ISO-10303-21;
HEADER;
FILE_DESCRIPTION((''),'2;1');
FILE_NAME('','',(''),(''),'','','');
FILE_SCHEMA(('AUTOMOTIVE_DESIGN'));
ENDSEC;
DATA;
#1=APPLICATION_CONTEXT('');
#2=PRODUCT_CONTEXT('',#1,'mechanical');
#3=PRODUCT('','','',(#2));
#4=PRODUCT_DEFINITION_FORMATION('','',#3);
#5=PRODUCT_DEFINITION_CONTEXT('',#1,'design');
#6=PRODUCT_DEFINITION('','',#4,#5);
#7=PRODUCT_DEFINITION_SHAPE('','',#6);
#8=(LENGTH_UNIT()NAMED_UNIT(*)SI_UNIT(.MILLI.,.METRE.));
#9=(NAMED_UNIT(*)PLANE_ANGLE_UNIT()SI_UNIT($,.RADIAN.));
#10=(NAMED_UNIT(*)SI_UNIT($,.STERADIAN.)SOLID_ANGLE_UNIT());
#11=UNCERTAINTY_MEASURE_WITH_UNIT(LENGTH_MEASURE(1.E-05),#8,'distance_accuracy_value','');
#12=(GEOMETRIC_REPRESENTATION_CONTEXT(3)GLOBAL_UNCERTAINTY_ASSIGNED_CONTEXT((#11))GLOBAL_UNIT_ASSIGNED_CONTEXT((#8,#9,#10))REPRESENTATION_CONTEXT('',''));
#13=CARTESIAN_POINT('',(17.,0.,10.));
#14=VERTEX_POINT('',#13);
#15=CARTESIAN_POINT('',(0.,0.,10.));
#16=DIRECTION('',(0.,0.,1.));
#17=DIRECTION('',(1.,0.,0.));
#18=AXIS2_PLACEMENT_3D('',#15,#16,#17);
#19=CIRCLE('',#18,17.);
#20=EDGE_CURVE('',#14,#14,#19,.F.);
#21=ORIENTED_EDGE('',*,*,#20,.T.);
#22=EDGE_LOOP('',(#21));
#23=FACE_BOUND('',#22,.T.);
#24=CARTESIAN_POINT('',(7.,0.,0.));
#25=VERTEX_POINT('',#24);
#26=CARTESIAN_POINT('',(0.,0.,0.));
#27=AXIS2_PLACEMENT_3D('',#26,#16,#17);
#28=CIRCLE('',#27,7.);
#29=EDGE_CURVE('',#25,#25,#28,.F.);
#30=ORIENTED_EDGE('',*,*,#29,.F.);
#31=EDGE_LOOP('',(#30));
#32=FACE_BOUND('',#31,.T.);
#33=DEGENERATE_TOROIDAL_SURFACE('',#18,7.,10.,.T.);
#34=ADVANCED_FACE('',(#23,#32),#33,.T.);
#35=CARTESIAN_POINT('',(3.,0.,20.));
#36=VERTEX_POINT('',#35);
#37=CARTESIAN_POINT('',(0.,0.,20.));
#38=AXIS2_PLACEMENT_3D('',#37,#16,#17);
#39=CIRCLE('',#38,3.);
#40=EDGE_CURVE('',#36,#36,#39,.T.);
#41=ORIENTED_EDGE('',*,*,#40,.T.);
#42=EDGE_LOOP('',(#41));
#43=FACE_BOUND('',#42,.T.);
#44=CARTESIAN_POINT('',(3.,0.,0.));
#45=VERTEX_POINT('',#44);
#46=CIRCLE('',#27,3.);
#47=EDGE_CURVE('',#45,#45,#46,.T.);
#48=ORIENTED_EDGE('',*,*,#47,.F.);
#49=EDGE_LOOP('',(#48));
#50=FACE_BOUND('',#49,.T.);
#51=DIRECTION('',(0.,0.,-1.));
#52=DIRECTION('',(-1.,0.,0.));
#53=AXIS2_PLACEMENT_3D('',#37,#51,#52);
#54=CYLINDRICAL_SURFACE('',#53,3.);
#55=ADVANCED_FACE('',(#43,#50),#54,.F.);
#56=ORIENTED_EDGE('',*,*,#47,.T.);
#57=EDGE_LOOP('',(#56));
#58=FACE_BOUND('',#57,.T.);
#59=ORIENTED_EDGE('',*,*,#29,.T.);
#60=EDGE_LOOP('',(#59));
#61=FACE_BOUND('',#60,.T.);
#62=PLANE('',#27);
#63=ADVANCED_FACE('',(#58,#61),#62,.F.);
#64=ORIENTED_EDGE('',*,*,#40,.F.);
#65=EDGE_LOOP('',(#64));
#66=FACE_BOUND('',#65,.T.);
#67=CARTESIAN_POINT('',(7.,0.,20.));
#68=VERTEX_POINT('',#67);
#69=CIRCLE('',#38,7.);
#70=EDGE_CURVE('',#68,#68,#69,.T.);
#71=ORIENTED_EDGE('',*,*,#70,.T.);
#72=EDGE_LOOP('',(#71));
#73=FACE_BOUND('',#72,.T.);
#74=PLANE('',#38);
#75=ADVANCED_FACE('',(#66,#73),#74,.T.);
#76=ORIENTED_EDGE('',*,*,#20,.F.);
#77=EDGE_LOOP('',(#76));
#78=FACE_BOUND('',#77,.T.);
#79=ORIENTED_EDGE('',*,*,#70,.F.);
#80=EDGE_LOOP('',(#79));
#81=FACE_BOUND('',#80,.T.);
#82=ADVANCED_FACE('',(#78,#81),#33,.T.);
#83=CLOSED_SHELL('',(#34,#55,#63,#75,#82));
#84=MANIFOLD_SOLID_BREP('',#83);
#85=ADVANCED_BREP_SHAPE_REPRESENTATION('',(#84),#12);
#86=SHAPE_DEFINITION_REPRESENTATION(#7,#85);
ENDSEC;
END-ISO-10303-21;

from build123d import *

# Parameters (mm, degrees)
ESBO_O1_R                = 17
ESBO_O1_R_2              = 3
RESSALTO_EXTRUS_O1_DEPTH = 20
FILETE1_R                = 10


with BuildPart() as part:
    # Esboço1 → Ressalto-extrusão1 (new body)
    with BuildSketch(Plane.XY):
        Circle(ESBO_O1_R)
        Circle(ESBO_O1_R_2, mode=Mode.SUBTRACT)
    extrude(amount=RESSALTO_EXTRUS_O1_DEPTH)

    # Filete1
    filete1_edges = [part.edges().sort_by_distance(p)[0] for p in [
        (-17, 0, 0),
        (-17, 0, 20),
    ]]
    fillet(filete1_edges, radius=FILETE1_R - 0.0001)  # a hair under: the kernel refuses the full size


solid = part.part
